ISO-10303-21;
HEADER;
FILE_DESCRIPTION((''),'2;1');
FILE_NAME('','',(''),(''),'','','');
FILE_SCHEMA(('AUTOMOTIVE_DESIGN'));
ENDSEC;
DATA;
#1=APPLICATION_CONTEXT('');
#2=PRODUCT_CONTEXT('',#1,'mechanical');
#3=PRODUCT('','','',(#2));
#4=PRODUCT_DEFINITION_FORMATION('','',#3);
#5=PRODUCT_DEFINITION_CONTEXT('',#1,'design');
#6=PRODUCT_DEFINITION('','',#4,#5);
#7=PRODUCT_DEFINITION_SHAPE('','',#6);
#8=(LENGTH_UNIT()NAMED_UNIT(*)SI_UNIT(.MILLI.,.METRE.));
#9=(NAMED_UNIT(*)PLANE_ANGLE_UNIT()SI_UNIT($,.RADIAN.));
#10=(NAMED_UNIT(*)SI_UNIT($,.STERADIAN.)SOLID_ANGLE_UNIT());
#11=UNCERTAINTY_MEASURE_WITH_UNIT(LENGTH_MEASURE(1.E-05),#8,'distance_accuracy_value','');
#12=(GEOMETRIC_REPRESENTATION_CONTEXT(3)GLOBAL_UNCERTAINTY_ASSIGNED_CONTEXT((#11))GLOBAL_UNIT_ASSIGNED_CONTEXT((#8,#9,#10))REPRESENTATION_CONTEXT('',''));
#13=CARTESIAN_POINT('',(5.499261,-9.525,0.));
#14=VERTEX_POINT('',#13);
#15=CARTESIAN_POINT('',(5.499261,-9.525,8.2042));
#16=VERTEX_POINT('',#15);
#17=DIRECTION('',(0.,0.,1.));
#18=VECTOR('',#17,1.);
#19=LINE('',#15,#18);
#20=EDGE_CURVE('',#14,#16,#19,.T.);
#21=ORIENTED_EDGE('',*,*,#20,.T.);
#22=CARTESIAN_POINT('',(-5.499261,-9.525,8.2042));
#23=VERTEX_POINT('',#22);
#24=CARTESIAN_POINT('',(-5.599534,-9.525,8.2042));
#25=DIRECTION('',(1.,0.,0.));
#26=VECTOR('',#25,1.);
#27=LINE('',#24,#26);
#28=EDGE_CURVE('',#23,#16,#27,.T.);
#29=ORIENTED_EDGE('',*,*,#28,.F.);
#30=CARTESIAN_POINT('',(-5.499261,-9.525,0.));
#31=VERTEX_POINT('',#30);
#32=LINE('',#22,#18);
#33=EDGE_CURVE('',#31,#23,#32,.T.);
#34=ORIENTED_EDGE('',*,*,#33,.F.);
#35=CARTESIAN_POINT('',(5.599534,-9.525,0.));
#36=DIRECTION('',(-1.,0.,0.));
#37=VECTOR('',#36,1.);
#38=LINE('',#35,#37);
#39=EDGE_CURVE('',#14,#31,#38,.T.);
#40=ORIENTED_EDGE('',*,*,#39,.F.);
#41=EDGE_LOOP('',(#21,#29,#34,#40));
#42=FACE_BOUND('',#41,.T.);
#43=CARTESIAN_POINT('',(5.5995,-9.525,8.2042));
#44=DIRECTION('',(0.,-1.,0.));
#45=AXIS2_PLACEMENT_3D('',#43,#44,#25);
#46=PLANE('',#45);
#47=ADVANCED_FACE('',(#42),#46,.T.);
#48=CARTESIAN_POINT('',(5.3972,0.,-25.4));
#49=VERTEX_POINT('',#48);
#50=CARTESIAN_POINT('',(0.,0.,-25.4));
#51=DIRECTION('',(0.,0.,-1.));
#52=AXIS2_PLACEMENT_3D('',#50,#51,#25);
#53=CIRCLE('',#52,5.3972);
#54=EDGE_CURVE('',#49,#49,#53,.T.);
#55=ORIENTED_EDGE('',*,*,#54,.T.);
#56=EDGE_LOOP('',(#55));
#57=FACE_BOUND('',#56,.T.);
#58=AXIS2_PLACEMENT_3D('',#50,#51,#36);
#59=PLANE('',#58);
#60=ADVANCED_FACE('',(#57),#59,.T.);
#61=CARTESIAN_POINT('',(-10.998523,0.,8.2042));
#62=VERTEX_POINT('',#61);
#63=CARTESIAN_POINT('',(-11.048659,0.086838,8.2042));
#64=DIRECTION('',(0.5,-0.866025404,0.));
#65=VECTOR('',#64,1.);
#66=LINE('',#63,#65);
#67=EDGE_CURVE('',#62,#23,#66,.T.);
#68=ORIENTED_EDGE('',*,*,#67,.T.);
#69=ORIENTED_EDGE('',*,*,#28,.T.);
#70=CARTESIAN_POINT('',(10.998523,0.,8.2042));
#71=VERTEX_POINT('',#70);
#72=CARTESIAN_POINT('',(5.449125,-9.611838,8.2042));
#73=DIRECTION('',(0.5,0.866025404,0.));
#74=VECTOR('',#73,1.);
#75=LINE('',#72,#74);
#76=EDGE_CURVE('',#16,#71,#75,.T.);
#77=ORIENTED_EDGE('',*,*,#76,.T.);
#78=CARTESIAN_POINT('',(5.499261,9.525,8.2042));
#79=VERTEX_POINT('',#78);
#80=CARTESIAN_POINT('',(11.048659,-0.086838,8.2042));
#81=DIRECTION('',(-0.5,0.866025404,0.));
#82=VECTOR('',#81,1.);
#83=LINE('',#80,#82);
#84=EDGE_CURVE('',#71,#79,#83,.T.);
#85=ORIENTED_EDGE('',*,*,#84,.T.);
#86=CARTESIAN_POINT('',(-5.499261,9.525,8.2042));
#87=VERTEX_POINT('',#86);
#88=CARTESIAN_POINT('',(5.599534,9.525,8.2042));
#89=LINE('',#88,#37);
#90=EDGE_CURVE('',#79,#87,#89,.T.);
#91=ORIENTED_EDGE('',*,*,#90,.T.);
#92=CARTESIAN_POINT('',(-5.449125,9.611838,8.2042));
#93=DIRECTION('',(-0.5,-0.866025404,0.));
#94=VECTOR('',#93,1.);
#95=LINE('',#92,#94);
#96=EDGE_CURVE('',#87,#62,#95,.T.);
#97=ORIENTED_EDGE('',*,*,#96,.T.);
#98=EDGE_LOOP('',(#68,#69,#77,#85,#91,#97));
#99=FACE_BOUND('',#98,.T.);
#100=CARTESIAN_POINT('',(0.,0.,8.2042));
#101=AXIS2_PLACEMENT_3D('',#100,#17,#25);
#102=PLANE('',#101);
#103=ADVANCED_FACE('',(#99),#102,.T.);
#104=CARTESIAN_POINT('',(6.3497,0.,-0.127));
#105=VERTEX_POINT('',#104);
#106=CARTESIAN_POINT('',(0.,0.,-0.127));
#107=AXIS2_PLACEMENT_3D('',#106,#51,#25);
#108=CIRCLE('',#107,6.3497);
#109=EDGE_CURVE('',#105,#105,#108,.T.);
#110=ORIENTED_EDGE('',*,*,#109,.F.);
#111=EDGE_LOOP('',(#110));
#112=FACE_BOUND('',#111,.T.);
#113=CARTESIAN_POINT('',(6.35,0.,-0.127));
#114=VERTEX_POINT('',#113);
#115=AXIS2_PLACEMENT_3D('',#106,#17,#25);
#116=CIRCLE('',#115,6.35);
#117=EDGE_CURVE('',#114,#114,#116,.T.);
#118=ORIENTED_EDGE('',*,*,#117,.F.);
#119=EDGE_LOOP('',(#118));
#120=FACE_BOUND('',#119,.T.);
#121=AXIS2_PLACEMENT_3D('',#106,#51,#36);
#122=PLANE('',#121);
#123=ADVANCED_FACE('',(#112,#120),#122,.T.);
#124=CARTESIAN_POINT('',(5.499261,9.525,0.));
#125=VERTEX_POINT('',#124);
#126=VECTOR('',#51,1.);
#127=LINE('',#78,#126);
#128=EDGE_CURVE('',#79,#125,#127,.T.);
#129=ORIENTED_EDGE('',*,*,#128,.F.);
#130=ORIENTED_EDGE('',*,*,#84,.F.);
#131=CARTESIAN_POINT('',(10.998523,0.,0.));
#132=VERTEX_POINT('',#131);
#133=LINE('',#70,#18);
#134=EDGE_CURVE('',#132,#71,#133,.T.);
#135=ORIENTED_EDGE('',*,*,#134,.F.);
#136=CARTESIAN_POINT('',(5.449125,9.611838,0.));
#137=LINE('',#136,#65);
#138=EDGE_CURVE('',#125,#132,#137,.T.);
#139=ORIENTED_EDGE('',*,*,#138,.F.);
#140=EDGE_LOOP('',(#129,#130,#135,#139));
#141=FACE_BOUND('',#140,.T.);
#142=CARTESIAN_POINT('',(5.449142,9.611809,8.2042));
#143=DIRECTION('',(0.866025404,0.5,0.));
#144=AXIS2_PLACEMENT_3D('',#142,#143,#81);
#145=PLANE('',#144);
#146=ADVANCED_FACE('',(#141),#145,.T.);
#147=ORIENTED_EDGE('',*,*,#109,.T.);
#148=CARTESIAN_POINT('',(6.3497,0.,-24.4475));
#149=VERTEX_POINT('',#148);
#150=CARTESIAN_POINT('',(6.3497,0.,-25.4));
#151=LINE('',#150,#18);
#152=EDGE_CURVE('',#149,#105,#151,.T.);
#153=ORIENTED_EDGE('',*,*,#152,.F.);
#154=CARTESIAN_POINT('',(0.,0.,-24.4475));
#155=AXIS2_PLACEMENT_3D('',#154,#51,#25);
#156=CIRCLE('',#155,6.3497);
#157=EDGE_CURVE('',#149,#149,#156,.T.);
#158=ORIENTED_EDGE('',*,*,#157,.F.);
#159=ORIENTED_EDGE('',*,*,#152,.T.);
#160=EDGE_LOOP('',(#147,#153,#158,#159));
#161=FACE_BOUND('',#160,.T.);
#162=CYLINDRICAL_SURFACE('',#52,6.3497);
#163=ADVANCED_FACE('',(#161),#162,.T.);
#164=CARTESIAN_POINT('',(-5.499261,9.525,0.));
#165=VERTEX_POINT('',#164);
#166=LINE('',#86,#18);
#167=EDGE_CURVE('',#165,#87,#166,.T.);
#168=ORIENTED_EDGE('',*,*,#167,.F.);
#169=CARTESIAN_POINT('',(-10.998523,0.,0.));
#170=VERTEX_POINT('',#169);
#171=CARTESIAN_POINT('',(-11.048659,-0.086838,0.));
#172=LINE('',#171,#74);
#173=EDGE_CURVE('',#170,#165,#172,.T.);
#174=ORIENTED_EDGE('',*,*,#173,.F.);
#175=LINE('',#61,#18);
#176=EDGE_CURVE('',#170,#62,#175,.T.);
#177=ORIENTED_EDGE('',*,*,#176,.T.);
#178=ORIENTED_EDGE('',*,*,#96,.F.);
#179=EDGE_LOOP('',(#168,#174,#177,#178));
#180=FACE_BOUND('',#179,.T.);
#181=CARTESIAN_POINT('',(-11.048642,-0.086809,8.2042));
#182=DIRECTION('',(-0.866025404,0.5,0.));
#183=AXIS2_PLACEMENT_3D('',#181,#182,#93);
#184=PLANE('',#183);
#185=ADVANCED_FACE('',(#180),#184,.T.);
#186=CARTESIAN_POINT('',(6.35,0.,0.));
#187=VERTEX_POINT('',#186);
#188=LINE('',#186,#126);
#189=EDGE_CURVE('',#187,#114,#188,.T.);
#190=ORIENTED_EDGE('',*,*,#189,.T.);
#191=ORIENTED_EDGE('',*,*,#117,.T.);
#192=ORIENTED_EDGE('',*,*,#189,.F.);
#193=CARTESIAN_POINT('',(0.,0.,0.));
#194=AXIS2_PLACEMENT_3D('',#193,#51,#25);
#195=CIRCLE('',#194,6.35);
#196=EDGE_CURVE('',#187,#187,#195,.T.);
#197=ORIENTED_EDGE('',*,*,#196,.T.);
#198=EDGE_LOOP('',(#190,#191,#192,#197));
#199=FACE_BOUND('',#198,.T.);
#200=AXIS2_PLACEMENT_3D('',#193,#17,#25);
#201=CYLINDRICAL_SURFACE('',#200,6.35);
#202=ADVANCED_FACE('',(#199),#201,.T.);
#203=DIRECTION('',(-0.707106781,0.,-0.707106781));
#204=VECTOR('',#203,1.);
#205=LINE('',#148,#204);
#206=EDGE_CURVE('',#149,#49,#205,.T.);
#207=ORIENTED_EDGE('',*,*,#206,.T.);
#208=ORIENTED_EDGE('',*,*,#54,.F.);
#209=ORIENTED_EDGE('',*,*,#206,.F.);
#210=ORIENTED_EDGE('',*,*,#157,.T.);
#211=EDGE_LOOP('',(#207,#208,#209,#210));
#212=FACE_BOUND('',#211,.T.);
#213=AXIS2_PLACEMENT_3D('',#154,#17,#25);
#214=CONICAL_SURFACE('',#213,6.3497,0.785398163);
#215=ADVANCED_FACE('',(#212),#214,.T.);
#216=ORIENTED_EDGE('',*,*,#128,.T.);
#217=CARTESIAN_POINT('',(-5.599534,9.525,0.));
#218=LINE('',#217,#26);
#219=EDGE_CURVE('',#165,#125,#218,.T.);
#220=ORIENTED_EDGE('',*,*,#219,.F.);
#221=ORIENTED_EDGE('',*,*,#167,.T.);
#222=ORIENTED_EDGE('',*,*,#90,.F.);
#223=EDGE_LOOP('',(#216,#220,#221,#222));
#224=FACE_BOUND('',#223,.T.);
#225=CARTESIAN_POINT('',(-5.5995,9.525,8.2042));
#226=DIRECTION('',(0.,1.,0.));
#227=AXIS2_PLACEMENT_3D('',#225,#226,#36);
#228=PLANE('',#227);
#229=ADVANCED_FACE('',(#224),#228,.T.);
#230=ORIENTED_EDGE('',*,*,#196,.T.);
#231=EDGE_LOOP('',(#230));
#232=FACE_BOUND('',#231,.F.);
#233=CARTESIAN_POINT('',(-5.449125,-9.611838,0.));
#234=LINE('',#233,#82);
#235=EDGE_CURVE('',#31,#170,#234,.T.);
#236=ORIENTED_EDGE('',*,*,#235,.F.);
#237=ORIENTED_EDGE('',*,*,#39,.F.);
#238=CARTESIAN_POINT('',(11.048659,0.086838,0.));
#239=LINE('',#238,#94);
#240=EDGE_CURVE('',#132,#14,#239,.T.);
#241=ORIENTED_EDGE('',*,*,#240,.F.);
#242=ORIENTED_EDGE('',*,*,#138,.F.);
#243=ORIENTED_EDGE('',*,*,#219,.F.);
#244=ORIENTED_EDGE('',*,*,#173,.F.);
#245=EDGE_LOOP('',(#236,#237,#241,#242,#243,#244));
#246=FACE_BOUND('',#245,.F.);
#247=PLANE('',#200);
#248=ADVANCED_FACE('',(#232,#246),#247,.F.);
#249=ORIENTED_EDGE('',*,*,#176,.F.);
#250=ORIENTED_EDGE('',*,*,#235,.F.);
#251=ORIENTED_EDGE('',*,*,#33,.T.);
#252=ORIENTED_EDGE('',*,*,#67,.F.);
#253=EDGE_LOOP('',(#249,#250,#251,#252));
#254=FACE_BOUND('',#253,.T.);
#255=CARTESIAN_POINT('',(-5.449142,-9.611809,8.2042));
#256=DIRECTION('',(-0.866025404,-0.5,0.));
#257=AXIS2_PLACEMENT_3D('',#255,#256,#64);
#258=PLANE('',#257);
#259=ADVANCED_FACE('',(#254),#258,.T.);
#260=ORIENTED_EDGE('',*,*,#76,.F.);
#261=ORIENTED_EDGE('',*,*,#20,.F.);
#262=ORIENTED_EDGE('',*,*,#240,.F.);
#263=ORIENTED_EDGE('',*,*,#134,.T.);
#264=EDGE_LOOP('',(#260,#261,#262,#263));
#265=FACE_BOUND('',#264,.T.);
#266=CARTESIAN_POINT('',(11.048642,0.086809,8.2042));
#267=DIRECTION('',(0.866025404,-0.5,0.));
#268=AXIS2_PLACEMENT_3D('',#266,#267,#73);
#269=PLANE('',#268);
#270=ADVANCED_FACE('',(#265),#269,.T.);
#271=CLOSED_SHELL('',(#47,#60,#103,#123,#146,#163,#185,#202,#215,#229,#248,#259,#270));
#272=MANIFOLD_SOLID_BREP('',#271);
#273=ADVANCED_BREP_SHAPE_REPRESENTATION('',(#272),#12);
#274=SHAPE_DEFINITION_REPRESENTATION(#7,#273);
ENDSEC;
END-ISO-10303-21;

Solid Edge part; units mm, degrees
sketch "Sketch1" plane through (0, 0, 0) normal (0, 0, 1) x (1, 0, 0)
  circle A0 centre (0, 0) radius 11.049
  dimension "D1" = 22.098
extrude "Protrusion1" add sketch "Sketch1" along normal blind 8.2042
sketch "Sketch2" plane through (0, 0, 0) normal (0, 0, -1) x (1, 0, 0)
  circle A0 centre (0, 0) radius 6.35
extrude "Protrusion2" add sketch "Sketch2" along normal blind 25.4
sketch "Sketch3" plane through (0, 0, -25.4) normal (0, 0, -1) x (1, 0, 0)
  circle A0 centre (0, 0) radius 6.3497
extrude "Cutout1" cut sketch "Sketch3" against normal blind 25.273 flip side to cut
chamfer "Chamfer_1" distance 0.9525 angle 45 1 edges at (-6.3497, 0, -25.4)
sketch "Sketch4" plane through (0, 0, 8.2042) normal (0, 0, 1) x (1, 0, 0)
  line L0 (-5.5995, 9.525) -> (5.5995, 9.525)
  dimension "D1" = 19.05
extrude "Cutout2" cut sketch "Sketch4" against normal up to next material side at (0, 9.575, 8.2042)
pattern_circular "Pattern1" count 6 over 360 about axis through (0, 0, 8.2042) along (0, 0, 1) of "Cutout2"
properties part number "24102858"
